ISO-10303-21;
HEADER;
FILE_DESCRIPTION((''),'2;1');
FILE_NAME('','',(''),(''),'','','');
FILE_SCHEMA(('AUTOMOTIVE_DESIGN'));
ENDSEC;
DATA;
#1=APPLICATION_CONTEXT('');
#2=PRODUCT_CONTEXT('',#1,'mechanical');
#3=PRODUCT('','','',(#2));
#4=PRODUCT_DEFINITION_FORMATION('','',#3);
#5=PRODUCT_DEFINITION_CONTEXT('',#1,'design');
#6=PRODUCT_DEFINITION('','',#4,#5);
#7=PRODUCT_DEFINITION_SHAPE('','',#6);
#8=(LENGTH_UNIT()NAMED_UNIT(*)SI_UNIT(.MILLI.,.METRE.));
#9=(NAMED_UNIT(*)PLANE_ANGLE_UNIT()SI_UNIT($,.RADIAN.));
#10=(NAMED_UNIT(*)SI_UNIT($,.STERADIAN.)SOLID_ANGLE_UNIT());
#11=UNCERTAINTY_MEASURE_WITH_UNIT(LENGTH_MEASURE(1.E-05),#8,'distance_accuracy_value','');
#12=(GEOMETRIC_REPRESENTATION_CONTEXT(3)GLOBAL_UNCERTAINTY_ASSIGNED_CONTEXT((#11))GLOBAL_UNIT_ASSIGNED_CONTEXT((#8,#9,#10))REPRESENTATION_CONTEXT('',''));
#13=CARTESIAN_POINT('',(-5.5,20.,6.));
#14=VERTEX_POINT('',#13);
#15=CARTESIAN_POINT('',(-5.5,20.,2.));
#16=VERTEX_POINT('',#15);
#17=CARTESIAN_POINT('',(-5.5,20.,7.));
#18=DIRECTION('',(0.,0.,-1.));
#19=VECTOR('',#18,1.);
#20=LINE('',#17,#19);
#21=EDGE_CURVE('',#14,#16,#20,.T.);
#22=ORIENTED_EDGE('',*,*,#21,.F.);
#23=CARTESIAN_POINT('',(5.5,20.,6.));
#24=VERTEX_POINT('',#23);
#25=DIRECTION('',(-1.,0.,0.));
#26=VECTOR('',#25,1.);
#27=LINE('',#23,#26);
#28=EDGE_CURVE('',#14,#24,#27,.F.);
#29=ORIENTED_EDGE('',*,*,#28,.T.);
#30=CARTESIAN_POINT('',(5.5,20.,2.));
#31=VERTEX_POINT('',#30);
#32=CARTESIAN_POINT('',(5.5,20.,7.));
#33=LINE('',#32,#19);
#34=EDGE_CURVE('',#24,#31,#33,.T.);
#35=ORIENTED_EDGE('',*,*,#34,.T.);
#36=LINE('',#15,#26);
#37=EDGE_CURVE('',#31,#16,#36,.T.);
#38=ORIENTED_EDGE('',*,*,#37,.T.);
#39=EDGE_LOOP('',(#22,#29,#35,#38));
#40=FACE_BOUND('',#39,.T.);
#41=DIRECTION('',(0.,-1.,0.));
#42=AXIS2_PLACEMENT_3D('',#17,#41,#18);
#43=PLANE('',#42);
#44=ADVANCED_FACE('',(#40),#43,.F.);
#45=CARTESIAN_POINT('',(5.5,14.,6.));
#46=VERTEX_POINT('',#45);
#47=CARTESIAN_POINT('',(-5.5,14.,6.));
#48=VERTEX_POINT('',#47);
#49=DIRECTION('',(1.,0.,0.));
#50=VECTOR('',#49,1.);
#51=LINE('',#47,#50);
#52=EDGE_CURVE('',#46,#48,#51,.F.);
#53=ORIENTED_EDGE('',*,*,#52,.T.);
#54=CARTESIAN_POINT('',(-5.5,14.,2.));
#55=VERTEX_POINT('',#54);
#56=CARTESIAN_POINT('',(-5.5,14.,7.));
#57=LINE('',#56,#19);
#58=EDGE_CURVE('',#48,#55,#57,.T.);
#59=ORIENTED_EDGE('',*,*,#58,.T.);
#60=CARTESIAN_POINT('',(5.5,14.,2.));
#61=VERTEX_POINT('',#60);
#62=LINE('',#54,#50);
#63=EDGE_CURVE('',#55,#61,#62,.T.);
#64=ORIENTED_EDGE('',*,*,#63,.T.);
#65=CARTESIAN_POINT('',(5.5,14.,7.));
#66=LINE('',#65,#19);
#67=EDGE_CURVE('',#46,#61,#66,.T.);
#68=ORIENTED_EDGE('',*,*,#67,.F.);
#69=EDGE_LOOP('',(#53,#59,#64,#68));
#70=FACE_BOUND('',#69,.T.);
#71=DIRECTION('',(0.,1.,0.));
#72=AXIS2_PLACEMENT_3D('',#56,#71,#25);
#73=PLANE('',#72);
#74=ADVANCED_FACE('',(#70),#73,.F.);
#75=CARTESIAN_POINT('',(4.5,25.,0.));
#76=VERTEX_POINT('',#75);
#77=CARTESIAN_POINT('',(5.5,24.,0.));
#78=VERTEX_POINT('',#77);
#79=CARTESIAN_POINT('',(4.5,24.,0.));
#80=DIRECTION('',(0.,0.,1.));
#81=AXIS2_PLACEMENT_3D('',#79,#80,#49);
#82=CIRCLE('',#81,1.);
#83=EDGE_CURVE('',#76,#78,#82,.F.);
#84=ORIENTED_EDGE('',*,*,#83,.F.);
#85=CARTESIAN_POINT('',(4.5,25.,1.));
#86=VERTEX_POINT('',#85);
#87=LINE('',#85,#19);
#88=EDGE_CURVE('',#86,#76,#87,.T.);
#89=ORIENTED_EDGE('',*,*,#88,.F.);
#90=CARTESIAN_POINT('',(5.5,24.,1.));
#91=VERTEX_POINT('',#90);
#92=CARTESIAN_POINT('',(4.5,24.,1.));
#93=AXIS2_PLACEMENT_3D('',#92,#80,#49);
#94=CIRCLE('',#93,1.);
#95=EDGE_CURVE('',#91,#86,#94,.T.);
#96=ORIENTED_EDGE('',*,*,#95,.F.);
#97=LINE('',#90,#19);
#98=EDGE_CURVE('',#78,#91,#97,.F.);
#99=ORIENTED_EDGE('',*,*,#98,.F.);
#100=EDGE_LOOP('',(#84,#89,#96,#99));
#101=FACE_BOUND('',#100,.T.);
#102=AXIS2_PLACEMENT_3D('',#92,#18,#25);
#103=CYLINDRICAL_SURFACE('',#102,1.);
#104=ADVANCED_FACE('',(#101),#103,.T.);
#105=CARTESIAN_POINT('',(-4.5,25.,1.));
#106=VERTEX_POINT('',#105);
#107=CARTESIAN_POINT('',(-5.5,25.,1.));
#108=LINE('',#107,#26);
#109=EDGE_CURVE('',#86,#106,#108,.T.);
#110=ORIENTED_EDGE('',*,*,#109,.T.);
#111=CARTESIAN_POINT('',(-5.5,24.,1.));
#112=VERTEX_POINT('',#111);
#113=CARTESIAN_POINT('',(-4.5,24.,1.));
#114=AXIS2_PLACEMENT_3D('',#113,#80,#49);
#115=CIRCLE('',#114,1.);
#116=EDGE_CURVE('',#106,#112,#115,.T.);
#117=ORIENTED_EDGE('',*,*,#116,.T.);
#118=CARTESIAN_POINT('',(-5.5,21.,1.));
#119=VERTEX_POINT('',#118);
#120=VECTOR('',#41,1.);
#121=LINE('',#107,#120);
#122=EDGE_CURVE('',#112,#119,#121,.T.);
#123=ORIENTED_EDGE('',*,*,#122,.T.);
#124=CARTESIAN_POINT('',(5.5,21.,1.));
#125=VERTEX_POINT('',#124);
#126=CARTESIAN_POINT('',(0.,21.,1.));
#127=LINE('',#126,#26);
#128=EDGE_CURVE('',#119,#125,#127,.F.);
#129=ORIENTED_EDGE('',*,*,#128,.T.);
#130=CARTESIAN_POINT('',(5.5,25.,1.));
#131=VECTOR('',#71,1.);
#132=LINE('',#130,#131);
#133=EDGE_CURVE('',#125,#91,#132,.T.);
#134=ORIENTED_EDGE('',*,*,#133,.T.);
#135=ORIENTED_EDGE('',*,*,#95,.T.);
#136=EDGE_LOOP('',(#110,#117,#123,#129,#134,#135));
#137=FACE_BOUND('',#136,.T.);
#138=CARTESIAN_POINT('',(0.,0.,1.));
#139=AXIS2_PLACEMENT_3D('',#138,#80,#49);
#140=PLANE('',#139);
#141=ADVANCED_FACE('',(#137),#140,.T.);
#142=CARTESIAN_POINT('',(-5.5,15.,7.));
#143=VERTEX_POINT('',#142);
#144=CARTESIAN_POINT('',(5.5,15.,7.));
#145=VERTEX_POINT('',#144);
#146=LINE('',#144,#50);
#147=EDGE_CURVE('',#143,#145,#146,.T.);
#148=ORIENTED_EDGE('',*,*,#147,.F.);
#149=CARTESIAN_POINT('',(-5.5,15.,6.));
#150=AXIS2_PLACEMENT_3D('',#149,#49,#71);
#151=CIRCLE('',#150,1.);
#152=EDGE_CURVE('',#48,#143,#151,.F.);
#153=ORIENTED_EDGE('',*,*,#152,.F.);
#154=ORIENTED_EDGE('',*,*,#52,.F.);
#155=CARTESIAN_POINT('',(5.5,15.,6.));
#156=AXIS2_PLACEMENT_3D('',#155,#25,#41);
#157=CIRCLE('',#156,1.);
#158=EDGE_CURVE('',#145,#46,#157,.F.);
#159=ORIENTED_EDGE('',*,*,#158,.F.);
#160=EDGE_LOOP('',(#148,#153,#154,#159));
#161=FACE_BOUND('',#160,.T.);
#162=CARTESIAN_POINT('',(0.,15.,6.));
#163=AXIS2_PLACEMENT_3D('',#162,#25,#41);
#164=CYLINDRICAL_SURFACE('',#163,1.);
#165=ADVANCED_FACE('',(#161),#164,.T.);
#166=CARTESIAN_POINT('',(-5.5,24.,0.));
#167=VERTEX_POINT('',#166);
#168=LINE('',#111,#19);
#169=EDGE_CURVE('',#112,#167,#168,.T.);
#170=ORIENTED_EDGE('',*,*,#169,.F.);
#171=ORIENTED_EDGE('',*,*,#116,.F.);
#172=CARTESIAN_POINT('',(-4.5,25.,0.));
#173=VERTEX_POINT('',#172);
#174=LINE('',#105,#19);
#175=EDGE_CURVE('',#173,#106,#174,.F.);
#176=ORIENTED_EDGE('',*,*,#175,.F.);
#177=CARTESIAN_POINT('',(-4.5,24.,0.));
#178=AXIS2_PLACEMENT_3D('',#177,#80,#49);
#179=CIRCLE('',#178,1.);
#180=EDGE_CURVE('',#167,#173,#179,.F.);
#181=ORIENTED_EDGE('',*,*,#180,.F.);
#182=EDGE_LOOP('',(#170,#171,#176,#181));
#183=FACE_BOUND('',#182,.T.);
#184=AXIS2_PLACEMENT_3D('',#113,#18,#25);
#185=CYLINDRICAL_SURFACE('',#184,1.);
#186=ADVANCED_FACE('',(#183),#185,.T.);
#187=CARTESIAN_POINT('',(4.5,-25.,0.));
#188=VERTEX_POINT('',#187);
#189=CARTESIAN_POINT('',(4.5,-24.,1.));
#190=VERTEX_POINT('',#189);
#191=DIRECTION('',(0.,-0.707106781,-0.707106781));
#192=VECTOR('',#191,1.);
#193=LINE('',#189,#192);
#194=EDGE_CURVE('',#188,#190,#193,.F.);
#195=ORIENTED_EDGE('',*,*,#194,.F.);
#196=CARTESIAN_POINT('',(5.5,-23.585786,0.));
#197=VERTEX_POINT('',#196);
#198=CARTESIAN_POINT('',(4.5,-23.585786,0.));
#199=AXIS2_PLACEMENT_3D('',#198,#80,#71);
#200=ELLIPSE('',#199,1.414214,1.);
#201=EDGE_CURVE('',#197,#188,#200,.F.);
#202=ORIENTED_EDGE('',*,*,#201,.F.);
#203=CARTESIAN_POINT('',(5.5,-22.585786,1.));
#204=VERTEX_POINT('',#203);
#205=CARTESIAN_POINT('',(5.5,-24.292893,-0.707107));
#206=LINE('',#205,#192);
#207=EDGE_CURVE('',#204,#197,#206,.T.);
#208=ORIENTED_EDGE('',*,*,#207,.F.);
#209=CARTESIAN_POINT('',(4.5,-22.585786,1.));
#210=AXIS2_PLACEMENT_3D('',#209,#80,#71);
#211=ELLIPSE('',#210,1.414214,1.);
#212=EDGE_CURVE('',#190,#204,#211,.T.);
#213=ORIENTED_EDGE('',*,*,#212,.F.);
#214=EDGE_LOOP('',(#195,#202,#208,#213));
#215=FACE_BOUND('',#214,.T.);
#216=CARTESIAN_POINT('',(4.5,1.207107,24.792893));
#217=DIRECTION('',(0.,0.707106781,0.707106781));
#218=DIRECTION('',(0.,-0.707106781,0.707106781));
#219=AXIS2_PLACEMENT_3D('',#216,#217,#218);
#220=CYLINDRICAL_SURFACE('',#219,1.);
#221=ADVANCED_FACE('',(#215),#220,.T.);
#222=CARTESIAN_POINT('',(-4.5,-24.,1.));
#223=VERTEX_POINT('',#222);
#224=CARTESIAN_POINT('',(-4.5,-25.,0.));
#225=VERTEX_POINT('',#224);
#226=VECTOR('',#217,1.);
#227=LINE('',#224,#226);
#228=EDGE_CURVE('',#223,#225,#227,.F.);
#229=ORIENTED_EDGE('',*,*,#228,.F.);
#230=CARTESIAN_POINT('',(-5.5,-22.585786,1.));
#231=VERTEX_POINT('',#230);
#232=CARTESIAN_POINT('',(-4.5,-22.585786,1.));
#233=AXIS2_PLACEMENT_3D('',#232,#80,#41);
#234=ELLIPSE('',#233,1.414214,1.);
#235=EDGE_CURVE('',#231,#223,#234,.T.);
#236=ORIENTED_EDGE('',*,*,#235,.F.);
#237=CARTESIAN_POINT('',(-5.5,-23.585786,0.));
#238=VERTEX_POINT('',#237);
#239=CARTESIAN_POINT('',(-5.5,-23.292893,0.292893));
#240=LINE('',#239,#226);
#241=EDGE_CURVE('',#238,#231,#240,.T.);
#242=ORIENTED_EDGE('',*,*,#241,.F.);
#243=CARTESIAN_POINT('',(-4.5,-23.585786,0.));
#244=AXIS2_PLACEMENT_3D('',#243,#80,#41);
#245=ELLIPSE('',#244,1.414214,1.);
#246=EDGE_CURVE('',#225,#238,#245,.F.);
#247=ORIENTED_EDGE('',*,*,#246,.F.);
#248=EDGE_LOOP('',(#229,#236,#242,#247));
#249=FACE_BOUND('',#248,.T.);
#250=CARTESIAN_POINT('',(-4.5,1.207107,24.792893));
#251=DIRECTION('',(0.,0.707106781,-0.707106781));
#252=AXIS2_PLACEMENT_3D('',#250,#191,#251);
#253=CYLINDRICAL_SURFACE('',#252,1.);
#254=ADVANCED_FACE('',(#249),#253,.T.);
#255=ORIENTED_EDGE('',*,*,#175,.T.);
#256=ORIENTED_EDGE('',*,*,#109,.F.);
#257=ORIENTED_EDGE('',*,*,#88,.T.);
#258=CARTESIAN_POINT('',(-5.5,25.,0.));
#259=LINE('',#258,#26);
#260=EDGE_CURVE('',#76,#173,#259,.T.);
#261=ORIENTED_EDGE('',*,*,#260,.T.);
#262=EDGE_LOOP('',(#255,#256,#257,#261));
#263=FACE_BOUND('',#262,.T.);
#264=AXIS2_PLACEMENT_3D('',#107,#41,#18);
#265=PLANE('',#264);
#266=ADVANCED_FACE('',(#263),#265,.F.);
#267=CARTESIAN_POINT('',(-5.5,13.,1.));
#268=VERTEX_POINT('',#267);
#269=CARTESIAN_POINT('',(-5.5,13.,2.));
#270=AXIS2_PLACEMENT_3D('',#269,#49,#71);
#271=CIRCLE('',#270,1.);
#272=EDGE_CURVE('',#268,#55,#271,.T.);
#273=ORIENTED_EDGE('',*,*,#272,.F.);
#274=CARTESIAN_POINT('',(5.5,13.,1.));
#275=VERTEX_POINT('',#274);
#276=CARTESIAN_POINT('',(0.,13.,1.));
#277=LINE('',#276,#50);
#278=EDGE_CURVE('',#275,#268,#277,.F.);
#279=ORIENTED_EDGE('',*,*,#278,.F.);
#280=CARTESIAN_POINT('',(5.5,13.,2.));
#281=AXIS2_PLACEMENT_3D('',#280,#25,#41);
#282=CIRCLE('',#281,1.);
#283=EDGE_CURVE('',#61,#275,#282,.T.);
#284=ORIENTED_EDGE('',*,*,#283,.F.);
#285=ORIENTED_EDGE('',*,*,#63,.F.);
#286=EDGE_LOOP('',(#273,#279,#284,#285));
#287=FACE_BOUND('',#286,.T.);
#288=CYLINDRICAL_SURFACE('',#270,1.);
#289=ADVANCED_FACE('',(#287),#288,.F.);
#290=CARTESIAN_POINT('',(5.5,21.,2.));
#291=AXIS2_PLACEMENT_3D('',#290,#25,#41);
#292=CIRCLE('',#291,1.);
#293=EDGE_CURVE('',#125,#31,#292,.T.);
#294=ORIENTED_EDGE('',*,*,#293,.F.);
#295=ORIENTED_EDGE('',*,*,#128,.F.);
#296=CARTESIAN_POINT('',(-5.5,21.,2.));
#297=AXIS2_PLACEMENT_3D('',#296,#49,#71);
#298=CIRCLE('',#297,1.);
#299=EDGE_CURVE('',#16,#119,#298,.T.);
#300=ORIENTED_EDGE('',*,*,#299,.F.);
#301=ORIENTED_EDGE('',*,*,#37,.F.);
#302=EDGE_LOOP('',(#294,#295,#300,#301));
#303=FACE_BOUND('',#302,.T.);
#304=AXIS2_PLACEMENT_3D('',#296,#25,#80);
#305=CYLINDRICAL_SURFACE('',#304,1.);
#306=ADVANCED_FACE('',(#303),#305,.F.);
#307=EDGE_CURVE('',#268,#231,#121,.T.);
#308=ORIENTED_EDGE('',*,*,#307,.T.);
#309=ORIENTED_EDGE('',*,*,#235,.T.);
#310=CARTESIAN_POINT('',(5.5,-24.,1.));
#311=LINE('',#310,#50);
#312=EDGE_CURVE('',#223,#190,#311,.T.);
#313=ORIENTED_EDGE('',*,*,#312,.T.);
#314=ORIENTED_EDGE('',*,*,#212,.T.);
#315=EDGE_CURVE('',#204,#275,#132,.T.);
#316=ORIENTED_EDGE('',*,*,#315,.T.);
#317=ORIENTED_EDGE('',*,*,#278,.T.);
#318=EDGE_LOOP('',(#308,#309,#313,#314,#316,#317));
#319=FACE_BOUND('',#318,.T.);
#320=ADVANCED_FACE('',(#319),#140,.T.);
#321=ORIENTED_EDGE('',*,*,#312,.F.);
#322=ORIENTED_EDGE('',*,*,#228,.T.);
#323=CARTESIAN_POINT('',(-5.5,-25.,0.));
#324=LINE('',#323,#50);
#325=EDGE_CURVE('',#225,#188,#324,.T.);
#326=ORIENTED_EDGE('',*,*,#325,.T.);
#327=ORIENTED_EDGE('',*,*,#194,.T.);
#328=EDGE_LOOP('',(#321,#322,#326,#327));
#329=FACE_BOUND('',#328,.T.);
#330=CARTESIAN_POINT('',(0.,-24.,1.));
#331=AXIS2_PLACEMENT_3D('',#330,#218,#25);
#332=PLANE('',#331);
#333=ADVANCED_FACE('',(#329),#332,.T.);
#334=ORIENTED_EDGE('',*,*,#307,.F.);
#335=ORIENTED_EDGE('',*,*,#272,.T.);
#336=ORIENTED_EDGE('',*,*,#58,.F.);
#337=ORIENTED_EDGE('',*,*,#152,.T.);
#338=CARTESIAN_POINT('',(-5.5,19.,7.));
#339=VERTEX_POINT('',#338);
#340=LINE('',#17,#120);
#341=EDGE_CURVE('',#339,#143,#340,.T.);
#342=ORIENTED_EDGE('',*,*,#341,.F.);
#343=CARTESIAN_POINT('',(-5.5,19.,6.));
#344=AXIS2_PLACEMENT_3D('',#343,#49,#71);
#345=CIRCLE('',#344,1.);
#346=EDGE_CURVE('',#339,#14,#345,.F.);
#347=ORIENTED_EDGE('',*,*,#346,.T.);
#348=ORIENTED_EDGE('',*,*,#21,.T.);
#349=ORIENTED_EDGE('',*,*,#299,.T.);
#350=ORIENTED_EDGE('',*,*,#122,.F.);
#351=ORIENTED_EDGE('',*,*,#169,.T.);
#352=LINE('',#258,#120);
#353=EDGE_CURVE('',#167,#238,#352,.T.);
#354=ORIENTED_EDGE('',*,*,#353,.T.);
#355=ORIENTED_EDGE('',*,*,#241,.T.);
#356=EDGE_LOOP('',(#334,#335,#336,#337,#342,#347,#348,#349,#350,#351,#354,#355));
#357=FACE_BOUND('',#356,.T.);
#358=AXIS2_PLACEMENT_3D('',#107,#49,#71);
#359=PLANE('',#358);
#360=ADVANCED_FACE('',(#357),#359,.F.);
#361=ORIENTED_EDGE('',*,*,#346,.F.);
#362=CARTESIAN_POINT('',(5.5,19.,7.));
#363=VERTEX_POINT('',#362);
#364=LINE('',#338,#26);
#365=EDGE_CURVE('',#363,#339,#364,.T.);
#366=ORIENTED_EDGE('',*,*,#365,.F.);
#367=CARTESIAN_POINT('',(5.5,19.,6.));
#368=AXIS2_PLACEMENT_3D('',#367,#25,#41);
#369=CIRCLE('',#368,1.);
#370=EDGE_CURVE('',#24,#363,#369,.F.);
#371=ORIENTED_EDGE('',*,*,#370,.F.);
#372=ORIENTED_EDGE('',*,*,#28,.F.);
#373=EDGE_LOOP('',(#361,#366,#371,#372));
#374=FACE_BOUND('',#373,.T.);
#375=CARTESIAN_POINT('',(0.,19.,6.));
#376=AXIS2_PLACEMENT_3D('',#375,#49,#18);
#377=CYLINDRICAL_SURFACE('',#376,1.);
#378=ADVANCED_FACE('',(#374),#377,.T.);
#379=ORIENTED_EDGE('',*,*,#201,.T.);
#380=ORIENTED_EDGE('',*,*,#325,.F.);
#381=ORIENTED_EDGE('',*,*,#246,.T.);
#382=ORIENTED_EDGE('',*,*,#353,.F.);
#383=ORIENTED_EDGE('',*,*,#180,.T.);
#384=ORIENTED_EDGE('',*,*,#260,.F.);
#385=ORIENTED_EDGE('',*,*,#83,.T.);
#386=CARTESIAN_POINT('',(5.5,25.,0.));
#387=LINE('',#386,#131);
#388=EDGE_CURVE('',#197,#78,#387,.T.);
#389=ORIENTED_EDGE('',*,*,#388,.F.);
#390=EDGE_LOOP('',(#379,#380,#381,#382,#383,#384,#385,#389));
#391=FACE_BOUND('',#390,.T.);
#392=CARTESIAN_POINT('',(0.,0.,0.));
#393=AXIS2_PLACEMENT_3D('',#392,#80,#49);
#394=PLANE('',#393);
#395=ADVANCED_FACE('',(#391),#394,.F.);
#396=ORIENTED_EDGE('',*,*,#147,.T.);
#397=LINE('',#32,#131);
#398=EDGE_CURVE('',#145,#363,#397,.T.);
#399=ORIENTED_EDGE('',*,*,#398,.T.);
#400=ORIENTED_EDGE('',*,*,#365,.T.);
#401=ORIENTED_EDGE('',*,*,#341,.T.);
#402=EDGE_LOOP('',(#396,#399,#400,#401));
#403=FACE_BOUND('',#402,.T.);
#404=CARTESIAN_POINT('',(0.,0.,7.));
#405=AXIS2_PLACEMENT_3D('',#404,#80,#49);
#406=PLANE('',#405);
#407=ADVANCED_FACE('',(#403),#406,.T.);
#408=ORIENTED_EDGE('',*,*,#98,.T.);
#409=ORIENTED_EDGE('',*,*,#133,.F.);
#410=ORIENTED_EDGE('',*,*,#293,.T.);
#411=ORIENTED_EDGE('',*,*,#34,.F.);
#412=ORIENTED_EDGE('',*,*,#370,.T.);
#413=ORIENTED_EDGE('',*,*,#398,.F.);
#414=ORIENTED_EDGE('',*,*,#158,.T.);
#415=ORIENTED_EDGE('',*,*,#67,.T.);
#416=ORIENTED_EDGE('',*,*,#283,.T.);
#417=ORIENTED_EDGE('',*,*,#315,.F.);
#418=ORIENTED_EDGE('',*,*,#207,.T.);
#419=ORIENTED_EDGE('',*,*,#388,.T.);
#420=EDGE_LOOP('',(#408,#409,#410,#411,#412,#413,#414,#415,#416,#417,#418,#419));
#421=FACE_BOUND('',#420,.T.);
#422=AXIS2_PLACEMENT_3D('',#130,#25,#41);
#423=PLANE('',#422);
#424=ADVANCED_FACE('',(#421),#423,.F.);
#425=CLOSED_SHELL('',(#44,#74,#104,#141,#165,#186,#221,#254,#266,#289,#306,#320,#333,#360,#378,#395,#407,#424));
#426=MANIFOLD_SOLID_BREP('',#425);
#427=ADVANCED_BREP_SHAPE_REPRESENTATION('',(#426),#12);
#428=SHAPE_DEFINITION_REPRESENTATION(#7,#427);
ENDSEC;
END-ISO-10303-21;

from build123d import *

# Parameters (mm, degrees)
SZKIC1_W                    = 11
SZKIC1_H                    = 50
DODANIE_WYCI_GNI_CIE1_DEPTH = 1
SFAZOWANIE1_SIZE            = 1
SZKIC2_W                    = 11
SZKIC2_H                    = 6
DODANIE_WYCI_GNI_CIE2_DEPTH = 6
ZAOKR_GLENIE1_R             = 1


with BuildPart() as part:
    # Szkic1 → Dodanie-wyciągnięcie1 (new body)
    with BuildSketch(Plane.XY):
        Rectangle(SZKIC1_W, SZKIC1_H)
    extrude(amount=DODANIE_WYCI_GNI_CIE1_DEPTH)

    # Sfazowanie1
    sfazowanie1_edges = [part.edges().sort_by_distance(p)[0] for p in [
        (0, -25, 1),
    ]]
    chamfer(sfazowanie1_edges, length=SFAZOWANIE1_SIZE - 0.0001)  # a hair under: the kernel refuses the full size

    # Szkic2 → Dodanie-wyciągnięcie2 (add)
    with BuildSketch(Plane.XY.offset(1)):
        with Locations((0, 17)):
            Rectangle(SZKIC2_W, SZKIC2_H)
    extrude(amount=DODANIE_WYCI_GNI_CIE2_DEPTH)

    # Zaokrąglenie1
    zaokr_glenie1_edges = [part.edges().sort_by_distance(p)[0] for p in [
        (5.5, -24.50005, 0.50005),
        (-5.5, -24.50005, 0.50005),
        (0, 14, 1),
        (0, 20, 1),
        (0, 14, 7),
        (0, 20, 7),
        (-5.5, 25, 0.5),
        (5.5, 25, 0.5),
    ]]
    fillet(zaokr_glenie1_edges, radius=ZAOKR_GLENIE1_R)


solid = part.part
